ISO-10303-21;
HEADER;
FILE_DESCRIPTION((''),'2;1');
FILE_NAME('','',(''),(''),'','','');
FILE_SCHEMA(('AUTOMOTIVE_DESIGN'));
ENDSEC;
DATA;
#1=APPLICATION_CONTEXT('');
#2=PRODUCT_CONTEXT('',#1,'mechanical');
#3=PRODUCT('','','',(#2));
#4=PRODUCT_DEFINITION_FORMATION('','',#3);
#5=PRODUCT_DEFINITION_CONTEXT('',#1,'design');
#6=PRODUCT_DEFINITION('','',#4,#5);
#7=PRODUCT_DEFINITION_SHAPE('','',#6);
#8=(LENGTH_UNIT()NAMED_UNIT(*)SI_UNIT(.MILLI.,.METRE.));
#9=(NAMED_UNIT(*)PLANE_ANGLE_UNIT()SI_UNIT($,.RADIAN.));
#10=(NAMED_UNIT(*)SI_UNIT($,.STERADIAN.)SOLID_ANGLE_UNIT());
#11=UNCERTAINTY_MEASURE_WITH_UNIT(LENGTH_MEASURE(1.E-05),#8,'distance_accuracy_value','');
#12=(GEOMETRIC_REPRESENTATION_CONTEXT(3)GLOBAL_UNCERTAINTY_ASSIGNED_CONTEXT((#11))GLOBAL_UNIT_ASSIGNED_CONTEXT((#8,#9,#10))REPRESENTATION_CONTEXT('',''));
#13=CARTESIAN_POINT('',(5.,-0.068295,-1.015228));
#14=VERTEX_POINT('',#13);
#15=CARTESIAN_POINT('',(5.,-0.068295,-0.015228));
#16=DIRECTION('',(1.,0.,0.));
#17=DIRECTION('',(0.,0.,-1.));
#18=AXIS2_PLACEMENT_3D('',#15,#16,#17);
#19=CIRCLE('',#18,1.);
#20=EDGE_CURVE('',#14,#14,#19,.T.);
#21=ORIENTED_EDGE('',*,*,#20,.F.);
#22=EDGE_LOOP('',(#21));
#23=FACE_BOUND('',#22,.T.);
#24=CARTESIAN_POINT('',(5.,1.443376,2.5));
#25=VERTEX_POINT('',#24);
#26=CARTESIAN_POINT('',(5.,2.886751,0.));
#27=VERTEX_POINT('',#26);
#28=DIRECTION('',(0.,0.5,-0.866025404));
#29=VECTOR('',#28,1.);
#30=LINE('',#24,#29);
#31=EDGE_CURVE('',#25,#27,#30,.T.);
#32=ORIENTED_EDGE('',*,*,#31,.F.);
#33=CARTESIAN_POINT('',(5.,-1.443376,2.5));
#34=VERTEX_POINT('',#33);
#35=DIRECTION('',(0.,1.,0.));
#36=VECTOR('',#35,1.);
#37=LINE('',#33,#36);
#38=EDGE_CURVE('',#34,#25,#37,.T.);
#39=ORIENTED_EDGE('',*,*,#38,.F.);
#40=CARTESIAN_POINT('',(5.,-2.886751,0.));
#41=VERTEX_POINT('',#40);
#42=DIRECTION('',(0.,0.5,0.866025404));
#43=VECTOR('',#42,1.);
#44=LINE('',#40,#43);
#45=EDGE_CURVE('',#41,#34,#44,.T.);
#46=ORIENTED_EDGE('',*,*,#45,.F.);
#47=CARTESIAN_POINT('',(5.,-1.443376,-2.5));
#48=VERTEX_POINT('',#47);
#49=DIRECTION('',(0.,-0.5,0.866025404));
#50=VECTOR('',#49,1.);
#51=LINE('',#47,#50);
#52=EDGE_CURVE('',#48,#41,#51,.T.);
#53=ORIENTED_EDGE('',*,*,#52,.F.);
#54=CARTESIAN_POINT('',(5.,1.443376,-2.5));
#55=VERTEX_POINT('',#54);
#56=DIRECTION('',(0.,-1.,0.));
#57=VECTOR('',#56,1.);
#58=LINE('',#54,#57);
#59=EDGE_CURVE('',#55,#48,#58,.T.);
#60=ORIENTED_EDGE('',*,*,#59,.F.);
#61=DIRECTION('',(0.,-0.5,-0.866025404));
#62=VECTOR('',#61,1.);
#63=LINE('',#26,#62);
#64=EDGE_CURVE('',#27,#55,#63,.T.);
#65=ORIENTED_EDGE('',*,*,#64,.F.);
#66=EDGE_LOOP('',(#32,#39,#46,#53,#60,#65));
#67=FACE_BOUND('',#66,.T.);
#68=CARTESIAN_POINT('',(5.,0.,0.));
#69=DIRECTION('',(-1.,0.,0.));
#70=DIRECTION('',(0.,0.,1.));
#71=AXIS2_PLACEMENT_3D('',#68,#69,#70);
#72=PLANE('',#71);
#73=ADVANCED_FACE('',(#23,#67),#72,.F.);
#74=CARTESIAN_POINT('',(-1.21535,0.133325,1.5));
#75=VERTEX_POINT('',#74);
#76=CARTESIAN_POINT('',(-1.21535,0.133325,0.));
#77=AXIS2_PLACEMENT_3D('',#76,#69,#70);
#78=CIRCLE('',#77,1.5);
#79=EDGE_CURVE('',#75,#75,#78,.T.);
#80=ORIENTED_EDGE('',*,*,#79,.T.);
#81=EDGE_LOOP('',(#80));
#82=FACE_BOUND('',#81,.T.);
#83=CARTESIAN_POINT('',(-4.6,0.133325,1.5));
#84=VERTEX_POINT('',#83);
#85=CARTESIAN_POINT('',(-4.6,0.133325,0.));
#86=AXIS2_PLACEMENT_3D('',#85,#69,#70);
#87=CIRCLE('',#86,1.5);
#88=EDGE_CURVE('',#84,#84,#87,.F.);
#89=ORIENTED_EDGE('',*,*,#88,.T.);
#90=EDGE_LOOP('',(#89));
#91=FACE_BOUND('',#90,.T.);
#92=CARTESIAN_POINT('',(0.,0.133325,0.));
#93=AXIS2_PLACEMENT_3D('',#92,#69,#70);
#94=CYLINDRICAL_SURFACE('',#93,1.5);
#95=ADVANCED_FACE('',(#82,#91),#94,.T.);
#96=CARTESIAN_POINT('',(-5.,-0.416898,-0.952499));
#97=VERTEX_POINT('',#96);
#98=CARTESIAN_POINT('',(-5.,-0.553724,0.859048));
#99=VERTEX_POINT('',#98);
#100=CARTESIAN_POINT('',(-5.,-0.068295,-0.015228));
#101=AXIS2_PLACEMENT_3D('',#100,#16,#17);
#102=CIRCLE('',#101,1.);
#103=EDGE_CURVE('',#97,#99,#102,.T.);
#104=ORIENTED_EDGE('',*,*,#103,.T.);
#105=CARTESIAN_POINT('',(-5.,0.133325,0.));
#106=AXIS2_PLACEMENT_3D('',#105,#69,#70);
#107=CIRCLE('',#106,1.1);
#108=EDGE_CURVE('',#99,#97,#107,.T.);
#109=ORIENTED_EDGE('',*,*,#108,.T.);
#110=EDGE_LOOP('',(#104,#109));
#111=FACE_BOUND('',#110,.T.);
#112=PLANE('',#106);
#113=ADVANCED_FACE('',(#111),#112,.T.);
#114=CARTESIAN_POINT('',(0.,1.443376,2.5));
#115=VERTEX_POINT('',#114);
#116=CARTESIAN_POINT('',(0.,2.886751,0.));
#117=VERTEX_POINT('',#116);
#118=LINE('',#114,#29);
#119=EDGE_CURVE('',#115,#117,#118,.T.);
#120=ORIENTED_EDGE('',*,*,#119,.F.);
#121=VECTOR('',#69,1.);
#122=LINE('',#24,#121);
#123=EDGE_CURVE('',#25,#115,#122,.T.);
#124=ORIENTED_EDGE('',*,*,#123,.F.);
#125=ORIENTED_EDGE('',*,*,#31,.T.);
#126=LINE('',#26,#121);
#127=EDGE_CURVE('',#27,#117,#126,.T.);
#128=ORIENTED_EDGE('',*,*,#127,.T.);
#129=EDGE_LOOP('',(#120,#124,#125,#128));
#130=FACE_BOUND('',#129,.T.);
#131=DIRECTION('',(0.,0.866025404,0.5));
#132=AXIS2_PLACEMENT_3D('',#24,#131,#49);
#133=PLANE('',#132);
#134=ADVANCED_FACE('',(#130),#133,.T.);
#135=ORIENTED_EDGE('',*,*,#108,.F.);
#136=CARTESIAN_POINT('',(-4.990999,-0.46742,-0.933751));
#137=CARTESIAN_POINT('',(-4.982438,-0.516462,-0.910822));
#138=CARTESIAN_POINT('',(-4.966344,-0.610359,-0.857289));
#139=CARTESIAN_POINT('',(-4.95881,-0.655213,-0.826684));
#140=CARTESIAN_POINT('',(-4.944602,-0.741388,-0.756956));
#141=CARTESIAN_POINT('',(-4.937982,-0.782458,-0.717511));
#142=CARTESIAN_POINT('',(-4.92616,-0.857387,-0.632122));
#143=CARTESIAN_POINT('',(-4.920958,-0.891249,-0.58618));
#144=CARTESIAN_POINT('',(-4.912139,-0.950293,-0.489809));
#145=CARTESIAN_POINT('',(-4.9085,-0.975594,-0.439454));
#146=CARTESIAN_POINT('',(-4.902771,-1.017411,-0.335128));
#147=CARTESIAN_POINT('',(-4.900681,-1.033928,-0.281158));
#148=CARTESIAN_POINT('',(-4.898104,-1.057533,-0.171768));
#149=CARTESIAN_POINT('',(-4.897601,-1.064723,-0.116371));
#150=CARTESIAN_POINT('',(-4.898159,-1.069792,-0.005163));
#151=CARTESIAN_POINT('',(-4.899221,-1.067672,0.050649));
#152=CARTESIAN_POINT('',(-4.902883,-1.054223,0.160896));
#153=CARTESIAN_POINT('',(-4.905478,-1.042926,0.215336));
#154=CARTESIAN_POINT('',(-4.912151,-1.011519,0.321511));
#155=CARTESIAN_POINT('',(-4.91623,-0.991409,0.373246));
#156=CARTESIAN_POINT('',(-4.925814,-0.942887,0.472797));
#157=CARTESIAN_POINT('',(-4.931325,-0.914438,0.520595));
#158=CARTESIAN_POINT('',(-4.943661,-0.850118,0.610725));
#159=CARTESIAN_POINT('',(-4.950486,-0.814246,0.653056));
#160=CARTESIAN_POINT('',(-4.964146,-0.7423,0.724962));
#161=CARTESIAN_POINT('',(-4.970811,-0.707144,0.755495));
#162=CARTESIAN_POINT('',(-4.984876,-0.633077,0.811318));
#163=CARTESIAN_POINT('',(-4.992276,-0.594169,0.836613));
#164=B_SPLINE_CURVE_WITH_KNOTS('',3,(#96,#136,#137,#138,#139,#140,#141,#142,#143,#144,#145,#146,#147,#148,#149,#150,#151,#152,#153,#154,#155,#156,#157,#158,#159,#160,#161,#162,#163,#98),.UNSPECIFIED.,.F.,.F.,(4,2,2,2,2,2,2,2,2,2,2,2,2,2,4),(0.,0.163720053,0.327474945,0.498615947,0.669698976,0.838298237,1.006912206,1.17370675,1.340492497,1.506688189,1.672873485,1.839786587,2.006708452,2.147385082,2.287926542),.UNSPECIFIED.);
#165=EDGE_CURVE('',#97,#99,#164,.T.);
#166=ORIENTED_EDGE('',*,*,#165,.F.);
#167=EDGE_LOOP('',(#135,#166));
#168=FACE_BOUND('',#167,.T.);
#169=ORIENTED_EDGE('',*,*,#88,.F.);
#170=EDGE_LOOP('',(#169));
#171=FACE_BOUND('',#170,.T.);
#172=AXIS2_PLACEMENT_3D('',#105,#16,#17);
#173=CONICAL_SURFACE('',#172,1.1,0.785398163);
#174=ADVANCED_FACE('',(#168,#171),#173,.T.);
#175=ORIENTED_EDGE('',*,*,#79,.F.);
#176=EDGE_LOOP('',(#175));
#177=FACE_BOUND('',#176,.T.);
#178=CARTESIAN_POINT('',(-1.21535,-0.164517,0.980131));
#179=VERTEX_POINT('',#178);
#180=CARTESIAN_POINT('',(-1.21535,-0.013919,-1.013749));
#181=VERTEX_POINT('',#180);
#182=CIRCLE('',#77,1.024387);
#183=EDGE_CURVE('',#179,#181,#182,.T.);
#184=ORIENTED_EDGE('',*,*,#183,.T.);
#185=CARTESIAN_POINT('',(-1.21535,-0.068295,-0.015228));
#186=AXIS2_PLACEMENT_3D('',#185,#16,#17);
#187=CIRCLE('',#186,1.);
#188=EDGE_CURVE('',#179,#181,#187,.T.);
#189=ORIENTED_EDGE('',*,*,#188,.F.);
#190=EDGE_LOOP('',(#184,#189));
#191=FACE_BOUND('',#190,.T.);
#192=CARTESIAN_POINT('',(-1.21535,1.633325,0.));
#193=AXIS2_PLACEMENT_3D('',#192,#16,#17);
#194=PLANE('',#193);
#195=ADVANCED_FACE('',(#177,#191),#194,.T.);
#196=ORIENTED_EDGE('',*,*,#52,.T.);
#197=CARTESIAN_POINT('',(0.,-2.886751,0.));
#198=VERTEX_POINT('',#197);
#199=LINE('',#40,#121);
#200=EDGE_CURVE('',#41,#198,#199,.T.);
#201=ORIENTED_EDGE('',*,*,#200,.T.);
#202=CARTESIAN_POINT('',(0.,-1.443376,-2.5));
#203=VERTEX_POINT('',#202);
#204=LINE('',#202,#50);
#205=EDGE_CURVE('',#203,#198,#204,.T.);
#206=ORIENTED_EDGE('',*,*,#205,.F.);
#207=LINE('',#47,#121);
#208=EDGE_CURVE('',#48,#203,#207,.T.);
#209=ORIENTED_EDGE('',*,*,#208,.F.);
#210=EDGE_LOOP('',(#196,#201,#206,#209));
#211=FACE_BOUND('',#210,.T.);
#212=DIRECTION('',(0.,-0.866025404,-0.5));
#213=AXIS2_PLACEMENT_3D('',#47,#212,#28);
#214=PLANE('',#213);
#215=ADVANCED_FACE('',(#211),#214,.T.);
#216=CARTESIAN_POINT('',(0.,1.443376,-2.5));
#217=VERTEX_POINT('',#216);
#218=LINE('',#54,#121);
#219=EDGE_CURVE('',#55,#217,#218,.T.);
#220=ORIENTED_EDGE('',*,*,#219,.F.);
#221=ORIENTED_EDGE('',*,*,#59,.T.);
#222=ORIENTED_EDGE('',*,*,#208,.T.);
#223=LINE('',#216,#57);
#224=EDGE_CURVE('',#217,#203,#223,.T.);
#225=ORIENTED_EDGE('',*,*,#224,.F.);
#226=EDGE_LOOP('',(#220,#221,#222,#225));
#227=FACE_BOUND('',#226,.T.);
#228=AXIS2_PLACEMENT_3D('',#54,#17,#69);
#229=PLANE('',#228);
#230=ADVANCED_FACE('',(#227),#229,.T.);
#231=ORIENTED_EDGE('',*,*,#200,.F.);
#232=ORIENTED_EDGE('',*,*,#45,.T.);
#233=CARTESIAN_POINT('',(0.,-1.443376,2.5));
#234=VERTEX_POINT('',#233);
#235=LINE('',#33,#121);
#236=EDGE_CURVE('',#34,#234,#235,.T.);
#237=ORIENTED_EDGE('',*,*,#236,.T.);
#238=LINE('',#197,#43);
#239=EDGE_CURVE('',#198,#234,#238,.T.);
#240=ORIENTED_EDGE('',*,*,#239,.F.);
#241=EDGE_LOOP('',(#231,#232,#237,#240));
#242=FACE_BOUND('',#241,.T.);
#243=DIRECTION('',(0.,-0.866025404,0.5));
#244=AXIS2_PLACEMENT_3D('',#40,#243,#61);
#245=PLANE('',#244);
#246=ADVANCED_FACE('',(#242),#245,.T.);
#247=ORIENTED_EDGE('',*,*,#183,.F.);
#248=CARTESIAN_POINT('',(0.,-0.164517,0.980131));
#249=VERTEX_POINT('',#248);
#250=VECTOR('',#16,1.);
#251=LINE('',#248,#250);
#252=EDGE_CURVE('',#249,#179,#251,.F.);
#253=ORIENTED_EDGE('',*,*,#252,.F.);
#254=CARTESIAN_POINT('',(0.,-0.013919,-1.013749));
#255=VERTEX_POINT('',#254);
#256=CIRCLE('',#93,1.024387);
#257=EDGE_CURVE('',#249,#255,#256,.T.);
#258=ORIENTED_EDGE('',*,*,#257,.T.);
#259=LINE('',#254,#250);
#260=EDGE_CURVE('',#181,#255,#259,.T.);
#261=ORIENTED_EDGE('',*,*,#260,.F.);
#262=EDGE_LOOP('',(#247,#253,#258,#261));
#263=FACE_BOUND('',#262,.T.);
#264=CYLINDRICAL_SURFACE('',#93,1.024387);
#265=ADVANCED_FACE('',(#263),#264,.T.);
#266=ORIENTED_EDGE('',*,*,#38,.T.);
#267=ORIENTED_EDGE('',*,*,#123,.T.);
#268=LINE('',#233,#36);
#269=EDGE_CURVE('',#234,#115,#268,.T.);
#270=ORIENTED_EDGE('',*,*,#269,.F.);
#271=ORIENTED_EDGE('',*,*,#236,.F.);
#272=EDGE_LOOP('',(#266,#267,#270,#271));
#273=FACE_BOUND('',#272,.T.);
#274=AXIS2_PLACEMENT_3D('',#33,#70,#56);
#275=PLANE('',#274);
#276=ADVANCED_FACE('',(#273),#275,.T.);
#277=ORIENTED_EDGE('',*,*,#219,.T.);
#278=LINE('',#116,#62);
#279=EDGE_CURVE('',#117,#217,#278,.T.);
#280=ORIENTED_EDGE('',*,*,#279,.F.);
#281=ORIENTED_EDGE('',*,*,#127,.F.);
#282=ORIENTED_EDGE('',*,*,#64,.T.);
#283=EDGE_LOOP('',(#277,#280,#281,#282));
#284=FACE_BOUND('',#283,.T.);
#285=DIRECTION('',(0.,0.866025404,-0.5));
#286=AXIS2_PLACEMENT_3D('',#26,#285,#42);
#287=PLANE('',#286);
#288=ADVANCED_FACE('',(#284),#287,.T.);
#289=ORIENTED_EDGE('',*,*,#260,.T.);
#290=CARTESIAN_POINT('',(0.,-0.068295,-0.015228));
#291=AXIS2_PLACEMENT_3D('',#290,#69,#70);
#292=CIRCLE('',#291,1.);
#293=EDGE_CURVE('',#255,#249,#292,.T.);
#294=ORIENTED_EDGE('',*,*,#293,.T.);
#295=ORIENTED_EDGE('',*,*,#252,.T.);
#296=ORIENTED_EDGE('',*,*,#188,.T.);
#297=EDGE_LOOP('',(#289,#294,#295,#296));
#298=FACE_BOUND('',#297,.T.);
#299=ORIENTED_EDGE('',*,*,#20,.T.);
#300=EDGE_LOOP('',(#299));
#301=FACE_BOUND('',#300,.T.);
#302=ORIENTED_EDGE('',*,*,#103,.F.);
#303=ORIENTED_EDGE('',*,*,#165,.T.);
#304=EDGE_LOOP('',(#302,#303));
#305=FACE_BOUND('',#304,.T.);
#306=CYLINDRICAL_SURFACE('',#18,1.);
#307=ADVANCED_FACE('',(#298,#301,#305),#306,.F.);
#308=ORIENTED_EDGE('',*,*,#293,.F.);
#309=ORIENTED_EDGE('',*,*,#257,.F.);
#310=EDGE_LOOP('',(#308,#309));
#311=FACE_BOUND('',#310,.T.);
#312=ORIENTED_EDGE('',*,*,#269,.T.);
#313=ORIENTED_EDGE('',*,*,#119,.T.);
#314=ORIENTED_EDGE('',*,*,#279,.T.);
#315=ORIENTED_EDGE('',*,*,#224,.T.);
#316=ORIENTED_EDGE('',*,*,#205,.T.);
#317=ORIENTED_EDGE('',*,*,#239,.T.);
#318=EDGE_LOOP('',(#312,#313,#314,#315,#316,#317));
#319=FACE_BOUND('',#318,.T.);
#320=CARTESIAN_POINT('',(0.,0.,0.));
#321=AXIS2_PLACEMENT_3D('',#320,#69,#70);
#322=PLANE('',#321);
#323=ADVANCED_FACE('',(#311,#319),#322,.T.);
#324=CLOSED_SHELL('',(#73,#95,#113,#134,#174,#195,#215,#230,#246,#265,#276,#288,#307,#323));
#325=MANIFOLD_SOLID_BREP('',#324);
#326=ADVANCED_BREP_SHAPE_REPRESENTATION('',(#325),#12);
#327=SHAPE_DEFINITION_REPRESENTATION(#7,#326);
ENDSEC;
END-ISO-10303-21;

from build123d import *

# Parameters (mm, degrees)
BOSS_EXTRU_1_DEPTH                = 5
DIAM_TRE_DU_PER_AGE_2_0_2_1_D     = 2
DIAM_TRE_DU_PER_AGE_2_0_2_1_DEPTH = 10
DIAM_TRE_DU_PER_AGE_2_0_2_1_TIP   = 0.600860619
CHANFREIN1_SIZE                   = 0.4


with BuildPart() as part:
    # Esquisse1 → Boss.-Extru.1 (new body)
    with BuildSketch(Plane(origin=(0, 0, 0), x_dir=(0, -1, 0), z_dir=(-1, 0, 0))):
        Polygon((-1.443375672, -2.5), (1.443375674, -2.5), (2.886751347, 1e-09), (1.443375673, 2.5), (-1.443375673, 2.5), (-2.886751345, 1e-09), align=None)
    extrude(amount=-BOSS_EXTRU_1_DEPTH)

    # Esquisse2 → Révolution1 (revolve)
    with BuildSketch(Plane(origin=(0, 0, 0), x_dir=(-1, 0, 0), z_dir=(0, 0, -1)), mode=Mode.PRIVATE) as r_volution1_sk:
        Polygon((0, 1.157712139), (0, 0.13332547), (5, 0.13332547), (5, 1.63332547), (1.215350333, 1.63332547), (1.215350333, 1.157712139), align=None)
    revolve(r_volution1_sk.sketch.rotate(Axis((0, 0.13332547, 0), (-1, 0, 0)), 270), axis=Axis((0, 0.13332547, 0), (-1, 0, 0)))

    # Diamètre du perçage Ø2.0 (2)1
    with Locations(Plane(origin=(5, 0, 0), x_dir=(0, 0, -1), z_dir=(1, 0, 0))):
        with Locations((0.015228416, -0.068295067)):
            Hole(DIAM_TRE_DU_PER_AGE_2_0_2_1_D / 2, depth=DIAM_TRE_DU_PER_AGE_2_0_2_1_DEPTH)
            with Locations((0, 0, -(DIAM_TRE_DU_PER_AGE_2_0_2_1_DEPTH + DIAM_TRE_DU_PER_AGE_2_0_2_1_TIP / 2))):  # 118° drill point
                Cone(0, DIAM_TRE_DU_PER_AGE_2_0_2_1_D / 2, DIAM_TRE_DU_PER_AGE_2_0_2_1_TIP, mode=Mode.SUBTRACT)

    # Chanfrein1
    # the kernel refuses this chamfer: 0.4 mm, written as the material it takes off along each edge
    with BuildSketch(Plane(origin=(-5, 0.13332547, 0), x_dir=(0, 0, 1), z_dir=(0, -1, 0))) as chanfrein1_piece_1:
        Polygon((1.5, -CHANFREIN1_SIZE), (1.5 - CHANFREIN1_SIZE, 0), (1.5, 0), align=None)
    revolve(axis=Axis((-5, 0.13332547, 0), (-1, 0, 0)), mode=Mode.SUBTRACT)


solid = part.part
